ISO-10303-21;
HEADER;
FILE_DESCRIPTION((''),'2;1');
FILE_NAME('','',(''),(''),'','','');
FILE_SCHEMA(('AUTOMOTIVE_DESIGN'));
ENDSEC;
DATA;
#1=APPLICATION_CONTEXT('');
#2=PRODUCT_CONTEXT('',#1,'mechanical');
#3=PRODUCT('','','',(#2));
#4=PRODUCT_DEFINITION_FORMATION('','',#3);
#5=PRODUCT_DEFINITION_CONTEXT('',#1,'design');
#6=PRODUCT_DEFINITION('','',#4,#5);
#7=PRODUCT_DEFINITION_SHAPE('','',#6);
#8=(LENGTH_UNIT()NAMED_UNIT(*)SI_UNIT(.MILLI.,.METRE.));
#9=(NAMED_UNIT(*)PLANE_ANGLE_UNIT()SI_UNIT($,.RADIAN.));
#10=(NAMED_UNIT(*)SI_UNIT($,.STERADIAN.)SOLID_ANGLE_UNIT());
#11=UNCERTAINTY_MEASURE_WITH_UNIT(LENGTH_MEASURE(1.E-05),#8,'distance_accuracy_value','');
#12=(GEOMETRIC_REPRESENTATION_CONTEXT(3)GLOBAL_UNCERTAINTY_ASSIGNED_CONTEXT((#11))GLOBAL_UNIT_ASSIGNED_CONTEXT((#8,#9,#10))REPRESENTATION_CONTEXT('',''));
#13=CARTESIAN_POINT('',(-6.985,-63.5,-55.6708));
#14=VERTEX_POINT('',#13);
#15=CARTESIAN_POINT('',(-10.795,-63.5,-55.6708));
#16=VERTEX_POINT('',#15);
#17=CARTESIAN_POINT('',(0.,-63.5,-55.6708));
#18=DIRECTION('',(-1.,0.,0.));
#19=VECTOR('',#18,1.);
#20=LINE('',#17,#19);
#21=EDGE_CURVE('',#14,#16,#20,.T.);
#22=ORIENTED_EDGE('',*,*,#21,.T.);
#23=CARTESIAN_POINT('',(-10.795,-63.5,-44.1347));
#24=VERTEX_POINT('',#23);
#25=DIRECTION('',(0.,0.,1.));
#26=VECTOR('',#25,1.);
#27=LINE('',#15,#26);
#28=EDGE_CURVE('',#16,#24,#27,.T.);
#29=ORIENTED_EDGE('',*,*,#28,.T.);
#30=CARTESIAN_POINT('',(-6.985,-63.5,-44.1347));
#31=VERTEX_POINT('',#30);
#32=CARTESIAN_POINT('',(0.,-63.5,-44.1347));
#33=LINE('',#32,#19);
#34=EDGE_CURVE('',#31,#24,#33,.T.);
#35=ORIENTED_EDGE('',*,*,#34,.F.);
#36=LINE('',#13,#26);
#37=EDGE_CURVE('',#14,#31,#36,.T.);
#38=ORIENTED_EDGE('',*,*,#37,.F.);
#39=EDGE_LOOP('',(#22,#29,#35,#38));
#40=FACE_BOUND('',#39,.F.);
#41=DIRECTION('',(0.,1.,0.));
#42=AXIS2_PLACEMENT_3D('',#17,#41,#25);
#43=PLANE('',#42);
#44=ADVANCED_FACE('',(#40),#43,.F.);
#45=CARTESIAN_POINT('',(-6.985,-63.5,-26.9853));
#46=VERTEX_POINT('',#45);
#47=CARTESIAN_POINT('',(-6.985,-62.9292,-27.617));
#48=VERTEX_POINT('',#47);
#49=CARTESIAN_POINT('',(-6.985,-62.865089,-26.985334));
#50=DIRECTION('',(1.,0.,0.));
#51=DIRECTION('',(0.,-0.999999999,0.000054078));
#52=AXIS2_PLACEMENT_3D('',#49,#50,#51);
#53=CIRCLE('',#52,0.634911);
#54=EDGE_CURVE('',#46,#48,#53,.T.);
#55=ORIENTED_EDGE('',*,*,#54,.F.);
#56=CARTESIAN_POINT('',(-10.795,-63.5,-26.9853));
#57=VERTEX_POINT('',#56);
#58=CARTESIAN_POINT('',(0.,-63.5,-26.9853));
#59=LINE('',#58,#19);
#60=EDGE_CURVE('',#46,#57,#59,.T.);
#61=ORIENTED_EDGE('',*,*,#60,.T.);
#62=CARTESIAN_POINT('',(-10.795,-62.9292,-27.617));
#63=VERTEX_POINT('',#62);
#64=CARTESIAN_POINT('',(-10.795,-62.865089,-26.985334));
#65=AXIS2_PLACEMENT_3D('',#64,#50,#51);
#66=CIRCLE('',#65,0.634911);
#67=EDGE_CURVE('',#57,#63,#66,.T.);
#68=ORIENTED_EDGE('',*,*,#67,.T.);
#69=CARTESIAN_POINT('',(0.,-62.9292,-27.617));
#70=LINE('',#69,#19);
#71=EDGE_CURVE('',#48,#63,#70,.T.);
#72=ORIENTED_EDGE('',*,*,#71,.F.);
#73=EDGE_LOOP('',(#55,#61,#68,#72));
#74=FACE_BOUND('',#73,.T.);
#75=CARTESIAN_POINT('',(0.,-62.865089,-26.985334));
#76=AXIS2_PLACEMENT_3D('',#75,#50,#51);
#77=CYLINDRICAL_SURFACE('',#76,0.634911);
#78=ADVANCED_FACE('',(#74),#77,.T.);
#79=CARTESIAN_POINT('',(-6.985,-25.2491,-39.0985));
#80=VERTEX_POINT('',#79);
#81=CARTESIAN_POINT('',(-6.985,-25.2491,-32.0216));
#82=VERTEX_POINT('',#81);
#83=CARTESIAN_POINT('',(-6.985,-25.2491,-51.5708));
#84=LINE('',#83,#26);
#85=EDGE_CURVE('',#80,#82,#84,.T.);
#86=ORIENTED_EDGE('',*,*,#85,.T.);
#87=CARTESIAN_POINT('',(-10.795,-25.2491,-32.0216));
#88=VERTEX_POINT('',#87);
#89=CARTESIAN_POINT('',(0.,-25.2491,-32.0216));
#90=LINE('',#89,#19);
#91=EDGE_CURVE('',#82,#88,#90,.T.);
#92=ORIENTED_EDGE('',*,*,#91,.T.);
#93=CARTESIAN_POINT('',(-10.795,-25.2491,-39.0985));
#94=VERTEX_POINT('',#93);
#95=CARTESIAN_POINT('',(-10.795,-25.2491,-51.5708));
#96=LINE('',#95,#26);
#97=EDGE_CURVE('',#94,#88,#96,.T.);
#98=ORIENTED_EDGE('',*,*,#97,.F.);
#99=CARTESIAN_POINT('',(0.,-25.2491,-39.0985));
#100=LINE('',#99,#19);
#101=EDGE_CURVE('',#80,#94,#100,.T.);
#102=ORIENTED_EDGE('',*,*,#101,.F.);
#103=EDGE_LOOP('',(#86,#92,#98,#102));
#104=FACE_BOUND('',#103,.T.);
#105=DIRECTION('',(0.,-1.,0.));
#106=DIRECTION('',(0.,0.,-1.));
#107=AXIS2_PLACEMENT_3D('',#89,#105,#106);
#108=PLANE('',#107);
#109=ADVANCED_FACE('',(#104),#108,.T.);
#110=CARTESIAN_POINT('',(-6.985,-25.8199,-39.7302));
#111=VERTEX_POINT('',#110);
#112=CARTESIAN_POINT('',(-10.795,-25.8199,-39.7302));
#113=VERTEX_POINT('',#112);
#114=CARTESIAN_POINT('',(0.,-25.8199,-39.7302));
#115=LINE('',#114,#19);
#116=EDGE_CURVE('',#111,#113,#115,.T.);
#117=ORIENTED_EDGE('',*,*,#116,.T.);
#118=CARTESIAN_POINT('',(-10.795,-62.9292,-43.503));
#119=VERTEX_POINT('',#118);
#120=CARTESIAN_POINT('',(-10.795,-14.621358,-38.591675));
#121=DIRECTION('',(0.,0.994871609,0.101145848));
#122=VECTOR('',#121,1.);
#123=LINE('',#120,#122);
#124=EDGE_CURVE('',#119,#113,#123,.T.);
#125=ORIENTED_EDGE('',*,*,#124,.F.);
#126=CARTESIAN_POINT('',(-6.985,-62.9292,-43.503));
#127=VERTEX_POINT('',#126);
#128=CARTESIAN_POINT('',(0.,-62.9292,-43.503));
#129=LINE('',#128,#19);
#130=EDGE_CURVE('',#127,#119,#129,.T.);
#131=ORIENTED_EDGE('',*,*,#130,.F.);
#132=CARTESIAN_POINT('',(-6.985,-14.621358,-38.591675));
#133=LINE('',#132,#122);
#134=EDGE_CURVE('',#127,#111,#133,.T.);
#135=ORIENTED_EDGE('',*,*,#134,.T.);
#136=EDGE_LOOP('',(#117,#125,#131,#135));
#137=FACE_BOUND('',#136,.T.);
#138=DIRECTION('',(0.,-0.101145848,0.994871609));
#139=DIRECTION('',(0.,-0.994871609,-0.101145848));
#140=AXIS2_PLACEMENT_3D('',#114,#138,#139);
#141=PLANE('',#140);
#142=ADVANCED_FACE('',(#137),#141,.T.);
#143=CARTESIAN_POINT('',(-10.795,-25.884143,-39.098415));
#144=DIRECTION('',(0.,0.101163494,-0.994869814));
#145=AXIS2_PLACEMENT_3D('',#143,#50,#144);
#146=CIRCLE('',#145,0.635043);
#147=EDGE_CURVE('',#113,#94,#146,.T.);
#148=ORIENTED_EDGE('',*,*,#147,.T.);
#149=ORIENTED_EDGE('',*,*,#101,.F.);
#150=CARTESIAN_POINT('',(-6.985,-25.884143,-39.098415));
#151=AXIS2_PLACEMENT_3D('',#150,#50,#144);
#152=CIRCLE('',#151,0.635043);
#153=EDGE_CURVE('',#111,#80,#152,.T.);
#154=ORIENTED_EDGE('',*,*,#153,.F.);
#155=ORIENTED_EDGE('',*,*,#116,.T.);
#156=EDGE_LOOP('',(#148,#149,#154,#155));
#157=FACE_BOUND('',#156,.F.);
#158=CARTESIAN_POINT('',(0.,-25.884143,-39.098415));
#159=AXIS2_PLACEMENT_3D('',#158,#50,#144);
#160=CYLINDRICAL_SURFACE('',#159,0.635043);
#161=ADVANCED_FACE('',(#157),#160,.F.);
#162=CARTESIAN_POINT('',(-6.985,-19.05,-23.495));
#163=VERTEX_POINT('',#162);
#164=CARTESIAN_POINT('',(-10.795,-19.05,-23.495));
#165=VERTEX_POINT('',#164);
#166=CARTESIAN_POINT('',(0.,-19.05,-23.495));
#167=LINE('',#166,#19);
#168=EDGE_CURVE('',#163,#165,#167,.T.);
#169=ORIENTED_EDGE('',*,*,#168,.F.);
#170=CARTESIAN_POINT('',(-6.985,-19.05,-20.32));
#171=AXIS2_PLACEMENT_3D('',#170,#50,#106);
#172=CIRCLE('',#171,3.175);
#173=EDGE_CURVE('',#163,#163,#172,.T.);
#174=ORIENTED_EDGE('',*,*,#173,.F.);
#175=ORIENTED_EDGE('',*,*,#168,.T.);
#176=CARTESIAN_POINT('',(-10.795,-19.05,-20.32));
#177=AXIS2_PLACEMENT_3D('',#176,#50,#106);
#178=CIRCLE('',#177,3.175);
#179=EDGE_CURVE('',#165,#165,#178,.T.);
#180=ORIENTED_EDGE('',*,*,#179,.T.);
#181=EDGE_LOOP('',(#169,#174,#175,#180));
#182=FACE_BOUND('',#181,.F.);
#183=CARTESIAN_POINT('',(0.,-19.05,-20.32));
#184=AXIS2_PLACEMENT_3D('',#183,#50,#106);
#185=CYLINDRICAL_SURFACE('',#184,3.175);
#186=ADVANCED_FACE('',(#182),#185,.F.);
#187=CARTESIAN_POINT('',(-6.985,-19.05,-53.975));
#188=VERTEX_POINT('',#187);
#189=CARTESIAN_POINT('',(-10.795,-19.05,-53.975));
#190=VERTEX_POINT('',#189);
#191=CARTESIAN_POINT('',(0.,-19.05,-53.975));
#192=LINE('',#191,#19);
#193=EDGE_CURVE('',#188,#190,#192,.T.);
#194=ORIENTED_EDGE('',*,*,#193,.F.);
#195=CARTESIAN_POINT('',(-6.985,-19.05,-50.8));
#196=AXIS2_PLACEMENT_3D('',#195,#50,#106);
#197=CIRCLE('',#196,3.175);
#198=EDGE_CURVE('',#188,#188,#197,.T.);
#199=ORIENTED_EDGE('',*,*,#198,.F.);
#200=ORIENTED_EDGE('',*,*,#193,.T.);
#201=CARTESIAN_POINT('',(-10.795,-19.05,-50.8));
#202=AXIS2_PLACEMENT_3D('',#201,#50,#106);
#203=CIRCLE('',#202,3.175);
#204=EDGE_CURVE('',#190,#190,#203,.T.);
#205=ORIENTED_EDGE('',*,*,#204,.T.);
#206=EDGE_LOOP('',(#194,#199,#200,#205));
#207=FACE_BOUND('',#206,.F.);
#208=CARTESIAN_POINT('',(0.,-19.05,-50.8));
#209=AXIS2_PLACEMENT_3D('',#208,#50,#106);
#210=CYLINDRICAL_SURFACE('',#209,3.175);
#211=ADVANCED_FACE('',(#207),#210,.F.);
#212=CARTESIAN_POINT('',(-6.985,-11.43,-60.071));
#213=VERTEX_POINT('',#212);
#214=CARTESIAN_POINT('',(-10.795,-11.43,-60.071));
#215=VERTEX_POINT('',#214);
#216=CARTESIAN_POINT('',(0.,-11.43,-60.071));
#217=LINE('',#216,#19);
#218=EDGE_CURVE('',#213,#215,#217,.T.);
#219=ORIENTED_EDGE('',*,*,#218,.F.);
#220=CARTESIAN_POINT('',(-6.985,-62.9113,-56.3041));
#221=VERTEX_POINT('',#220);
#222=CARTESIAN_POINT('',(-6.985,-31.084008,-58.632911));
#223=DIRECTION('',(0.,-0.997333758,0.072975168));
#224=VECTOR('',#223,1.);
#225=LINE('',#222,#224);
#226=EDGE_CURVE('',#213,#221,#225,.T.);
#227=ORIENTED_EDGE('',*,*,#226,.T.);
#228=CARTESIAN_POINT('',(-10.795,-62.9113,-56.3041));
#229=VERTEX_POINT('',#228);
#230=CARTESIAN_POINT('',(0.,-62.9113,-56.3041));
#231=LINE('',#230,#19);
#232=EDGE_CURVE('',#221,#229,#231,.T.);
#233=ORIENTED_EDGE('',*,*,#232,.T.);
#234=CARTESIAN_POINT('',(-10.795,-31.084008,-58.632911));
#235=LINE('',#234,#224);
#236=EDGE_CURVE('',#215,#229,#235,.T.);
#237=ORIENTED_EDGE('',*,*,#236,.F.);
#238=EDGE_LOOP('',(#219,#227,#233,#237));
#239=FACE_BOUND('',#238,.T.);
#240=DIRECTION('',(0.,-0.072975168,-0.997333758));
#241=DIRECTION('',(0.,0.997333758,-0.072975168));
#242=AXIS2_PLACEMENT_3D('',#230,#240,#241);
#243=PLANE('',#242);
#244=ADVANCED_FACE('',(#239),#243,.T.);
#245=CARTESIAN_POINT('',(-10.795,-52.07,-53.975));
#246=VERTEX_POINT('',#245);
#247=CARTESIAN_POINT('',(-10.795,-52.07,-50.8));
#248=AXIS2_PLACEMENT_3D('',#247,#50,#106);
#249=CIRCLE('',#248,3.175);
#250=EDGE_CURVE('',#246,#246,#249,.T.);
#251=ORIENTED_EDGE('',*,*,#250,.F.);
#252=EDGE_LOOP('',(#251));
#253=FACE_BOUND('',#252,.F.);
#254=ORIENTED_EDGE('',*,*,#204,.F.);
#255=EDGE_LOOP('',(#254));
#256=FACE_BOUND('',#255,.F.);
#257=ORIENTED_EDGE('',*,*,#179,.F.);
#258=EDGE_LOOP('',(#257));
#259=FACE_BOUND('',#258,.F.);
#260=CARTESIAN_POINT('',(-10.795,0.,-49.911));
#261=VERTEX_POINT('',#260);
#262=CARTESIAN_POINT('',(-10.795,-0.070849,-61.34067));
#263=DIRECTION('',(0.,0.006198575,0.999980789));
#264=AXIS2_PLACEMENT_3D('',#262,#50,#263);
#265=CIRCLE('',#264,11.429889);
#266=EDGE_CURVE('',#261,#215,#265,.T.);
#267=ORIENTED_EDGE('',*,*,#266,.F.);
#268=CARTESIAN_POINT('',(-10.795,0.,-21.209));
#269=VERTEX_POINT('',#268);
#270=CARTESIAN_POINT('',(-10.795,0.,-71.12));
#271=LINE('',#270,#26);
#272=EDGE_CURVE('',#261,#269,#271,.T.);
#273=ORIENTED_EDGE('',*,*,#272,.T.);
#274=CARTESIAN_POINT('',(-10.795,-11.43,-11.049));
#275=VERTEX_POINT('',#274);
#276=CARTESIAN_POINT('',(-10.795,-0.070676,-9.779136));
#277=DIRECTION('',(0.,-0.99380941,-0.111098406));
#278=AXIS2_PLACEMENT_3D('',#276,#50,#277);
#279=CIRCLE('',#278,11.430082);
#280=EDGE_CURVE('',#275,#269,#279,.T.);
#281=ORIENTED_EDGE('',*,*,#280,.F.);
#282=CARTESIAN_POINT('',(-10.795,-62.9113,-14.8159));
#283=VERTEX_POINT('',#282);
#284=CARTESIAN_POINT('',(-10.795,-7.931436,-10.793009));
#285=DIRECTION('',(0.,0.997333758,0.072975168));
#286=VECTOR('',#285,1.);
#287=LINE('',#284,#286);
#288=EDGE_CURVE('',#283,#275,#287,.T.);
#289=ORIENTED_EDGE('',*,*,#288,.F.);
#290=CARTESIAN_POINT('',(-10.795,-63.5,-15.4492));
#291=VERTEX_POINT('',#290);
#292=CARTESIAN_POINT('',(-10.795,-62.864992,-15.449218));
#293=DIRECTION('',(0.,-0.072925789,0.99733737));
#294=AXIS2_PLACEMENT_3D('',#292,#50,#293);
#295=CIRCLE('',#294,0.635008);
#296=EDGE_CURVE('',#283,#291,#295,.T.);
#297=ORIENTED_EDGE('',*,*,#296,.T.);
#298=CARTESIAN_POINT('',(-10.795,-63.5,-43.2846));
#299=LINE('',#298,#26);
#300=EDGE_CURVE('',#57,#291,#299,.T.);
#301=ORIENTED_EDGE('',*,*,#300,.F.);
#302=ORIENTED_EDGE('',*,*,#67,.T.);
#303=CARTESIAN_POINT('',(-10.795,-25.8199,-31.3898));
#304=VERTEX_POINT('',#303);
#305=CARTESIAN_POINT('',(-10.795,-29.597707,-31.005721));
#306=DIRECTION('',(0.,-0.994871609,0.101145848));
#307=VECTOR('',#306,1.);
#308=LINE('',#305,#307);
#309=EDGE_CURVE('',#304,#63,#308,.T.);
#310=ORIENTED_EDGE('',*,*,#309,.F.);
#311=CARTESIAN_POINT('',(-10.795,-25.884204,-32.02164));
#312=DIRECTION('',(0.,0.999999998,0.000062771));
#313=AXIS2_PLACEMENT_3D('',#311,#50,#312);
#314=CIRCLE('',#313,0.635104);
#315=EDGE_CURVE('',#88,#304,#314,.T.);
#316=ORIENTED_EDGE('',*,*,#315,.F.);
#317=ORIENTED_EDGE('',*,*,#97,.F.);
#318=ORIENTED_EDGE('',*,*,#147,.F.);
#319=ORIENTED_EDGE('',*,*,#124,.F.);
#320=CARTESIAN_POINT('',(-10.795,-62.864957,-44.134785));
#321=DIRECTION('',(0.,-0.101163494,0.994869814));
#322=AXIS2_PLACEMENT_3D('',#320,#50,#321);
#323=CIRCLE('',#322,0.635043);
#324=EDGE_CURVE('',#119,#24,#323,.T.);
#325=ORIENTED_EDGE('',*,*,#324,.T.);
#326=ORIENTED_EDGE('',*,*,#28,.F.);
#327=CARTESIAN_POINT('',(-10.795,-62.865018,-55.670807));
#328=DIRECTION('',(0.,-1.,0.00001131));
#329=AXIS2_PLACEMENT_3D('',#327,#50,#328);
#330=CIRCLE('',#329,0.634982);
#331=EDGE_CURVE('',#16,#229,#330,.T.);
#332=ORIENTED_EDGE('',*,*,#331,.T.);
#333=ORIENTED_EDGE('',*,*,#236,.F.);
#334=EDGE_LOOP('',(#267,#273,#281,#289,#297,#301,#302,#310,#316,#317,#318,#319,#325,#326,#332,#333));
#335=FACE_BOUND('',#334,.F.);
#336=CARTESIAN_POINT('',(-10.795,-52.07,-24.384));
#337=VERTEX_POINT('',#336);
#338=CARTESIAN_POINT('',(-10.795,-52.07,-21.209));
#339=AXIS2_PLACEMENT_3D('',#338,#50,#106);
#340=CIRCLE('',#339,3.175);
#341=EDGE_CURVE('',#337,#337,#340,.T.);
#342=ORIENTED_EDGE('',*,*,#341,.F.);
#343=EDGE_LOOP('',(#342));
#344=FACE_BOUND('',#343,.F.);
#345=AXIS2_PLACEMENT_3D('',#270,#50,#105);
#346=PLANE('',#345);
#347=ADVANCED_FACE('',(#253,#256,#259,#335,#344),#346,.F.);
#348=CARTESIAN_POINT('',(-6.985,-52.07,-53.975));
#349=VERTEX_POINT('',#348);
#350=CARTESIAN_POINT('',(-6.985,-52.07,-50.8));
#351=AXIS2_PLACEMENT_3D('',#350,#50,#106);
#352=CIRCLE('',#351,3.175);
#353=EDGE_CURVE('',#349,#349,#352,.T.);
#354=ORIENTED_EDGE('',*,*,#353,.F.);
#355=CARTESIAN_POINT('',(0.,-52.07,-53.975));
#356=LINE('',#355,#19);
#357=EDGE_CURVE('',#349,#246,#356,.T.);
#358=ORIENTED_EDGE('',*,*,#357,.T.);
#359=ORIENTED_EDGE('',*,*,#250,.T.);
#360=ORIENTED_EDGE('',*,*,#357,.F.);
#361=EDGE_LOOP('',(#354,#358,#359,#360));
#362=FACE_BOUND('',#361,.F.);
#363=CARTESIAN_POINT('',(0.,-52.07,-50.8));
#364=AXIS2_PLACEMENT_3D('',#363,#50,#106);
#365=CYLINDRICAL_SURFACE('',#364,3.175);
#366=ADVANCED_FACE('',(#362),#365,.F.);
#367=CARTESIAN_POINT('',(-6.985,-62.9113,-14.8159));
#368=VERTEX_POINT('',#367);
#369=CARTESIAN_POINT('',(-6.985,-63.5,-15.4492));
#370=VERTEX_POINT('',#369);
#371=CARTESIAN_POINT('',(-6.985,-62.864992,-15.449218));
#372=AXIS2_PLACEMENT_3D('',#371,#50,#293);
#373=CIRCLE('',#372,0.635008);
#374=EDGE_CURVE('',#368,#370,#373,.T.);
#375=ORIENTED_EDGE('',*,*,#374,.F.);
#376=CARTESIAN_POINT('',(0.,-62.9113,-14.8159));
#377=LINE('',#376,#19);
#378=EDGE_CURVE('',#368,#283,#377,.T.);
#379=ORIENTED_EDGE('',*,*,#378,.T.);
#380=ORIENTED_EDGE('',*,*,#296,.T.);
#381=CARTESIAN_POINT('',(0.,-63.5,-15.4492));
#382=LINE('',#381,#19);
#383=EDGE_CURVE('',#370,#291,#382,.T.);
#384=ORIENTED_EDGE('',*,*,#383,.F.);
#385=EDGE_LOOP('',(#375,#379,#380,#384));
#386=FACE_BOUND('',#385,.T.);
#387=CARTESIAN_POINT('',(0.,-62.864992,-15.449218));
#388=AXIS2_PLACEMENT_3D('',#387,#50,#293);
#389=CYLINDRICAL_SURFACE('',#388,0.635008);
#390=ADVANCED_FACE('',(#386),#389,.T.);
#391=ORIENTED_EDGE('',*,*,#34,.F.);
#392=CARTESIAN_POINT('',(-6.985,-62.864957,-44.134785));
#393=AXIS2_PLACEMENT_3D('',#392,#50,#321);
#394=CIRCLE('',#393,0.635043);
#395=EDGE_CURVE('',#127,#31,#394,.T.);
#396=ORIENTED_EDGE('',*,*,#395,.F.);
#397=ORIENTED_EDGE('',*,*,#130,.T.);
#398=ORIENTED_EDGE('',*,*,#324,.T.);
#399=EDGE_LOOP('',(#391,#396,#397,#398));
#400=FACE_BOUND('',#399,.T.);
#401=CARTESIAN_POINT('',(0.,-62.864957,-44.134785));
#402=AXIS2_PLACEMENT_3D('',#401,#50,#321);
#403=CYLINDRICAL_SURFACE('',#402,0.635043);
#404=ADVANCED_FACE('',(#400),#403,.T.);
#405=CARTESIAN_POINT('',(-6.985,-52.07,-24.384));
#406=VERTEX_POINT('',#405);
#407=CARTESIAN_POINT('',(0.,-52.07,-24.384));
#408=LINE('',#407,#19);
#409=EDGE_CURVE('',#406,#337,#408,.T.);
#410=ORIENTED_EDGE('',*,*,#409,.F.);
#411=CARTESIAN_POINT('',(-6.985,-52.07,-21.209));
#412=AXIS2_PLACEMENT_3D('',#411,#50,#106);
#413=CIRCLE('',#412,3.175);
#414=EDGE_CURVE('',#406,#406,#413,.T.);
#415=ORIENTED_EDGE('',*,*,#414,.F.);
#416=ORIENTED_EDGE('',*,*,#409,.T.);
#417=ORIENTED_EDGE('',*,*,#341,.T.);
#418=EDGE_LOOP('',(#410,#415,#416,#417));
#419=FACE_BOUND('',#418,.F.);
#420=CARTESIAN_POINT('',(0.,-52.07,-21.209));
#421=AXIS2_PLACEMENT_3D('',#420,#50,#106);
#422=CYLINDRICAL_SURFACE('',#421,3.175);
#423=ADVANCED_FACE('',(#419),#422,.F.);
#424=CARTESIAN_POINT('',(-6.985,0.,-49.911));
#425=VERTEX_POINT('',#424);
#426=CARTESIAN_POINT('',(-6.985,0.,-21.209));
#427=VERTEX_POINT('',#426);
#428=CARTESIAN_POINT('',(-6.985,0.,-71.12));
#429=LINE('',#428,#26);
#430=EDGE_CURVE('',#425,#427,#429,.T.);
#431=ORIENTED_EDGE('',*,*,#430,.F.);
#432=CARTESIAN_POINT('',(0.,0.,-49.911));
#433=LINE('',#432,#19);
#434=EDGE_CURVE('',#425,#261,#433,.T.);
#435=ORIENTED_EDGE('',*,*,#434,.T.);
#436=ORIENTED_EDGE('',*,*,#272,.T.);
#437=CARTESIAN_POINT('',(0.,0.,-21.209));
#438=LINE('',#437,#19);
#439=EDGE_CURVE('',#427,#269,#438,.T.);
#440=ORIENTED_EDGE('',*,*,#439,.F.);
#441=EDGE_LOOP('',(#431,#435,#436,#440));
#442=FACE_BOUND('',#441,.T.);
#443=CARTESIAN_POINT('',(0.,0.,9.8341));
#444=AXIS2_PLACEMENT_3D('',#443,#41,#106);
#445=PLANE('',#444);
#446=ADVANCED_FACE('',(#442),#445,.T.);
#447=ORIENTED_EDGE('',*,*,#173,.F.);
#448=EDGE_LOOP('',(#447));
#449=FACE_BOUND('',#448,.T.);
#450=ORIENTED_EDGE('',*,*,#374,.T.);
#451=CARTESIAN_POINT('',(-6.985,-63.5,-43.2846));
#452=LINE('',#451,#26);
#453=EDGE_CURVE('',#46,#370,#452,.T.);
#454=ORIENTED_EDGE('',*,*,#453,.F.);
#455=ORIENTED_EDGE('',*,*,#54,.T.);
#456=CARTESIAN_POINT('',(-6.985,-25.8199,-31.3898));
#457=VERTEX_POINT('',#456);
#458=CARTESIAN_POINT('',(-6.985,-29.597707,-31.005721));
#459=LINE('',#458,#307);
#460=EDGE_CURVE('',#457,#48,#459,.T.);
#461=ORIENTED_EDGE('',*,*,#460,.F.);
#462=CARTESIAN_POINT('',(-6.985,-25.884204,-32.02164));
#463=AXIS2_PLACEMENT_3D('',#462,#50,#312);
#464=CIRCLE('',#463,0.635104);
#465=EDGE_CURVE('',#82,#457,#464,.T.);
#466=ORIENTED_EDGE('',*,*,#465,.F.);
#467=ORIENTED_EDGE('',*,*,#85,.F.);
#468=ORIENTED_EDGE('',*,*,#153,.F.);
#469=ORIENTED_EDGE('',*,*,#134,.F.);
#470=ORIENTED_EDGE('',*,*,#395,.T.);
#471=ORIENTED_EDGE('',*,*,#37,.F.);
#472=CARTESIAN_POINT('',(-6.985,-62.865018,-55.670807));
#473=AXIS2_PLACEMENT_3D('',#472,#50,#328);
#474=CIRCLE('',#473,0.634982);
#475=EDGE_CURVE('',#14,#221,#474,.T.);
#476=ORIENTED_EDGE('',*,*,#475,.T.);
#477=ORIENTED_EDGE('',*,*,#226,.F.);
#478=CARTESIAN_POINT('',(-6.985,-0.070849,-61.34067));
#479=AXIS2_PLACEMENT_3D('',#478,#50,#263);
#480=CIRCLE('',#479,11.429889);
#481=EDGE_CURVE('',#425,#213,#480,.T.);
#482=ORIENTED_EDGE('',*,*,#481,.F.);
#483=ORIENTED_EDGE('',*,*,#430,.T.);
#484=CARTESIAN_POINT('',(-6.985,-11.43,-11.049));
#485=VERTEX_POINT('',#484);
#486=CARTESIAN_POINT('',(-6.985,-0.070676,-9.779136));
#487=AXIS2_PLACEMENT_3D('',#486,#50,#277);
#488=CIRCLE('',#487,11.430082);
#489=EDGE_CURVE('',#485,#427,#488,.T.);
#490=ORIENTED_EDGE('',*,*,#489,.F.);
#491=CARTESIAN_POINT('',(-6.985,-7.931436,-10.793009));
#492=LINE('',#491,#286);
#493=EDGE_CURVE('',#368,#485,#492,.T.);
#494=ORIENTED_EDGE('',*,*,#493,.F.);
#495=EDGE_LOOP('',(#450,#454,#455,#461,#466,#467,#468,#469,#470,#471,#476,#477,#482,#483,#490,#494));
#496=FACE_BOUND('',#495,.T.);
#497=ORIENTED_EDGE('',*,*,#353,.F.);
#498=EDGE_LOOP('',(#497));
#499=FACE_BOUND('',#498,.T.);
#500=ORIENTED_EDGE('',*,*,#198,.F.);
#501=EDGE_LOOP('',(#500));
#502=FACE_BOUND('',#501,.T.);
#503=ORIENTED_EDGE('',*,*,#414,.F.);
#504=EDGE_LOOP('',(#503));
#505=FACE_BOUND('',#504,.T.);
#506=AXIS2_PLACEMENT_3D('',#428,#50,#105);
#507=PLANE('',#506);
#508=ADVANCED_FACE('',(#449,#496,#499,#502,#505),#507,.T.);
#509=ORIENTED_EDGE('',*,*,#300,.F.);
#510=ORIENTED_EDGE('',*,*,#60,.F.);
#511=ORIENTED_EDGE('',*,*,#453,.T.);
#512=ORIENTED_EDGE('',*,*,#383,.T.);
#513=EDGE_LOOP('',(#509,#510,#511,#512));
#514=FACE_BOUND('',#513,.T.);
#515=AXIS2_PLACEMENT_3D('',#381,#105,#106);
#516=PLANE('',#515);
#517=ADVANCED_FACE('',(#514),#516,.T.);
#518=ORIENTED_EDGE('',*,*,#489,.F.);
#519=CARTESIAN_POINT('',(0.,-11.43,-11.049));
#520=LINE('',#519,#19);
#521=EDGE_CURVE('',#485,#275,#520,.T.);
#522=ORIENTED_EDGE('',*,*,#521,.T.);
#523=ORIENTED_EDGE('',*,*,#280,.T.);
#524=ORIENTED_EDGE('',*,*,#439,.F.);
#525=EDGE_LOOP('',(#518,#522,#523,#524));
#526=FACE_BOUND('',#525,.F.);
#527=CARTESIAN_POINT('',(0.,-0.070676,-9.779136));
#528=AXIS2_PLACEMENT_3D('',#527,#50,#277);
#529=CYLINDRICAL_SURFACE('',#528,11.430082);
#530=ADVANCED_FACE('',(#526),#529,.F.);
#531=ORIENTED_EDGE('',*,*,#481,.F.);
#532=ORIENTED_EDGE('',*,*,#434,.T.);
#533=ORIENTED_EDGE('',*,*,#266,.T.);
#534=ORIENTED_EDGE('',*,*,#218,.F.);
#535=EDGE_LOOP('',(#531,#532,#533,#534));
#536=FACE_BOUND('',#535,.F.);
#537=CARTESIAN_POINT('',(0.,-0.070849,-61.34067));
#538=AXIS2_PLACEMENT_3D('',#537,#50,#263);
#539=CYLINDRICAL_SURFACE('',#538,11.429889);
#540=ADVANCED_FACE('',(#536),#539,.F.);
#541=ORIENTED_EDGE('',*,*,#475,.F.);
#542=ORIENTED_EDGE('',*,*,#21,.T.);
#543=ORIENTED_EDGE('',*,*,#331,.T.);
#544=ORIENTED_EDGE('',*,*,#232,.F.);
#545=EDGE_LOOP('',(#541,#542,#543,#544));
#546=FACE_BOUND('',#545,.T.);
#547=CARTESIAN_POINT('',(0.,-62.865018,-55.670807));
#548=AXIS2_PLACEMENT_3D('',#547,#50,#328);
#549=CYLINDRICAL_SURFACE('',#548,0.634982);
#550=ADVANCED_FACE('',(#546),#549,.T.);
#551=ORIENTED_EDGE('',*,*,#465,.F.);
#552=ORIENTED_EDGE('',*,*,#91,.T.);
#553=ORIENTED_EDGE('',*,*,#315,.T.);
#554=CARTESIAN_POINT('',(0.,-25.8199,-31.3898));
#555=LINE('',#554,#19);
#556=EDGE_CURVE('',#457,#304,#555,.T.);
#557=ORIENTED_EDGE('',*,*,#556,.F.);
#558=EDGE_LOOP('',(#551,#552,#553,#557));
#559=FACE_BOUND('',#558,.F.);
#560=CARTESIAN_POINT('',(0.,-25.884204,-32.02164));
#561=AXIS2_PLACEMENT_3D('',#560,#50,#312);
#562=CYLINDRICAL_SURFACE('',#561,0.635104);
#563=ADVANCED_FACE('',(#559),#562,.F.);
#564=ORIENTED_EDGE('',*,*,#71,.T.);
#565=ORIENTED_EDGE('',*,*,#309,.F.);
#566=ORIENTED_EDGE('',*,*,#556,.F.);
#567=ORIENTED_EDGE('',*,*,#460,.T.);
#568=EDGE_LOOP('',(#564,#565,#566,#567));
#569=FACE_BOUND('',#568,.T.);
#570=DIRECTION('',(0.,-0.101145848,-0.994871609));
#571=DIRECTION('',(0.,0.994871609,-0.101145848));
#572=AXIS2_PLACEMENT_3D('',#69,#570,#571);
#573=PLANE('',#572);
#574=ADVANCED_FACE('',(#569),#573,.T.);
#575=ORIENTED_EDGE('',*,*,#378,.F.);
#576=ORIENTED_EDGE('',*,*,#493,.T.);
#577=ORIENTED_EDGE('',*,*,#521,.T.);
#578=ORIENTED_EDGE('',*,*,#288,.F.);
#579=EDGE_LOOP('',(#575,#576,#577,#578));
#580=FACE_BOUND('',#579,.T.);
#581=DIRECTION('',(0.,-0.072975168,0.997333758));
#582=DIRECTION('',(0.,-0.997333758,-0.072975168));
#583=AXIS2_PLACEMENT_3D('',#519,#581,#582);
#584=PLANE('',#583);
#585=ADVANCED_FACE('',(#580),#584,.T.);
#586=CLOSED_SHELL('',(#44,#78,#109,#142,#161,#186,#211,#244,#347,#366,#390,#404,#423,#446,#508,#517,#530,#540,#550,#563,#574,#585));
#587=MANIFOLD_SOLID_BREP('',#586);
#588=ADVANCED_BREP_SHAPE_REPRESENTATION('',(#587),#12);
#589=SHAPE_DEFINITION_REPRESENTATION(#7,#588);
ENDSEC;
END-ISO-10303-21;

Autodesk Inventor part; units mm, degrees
ref_plane "YZ Plane" through (0, 0, 0) normal (1, 0, 0) x (0, 1, 0)
ref_plane "XZ Plane" through (0, 0, 0) normal (0, 1, 0) x (-1, 0, 0)
sketch "Sketch1" plane through (0, 0, 0) normal (0, 1, 0) x (-1, 0, 0)
  line L0 (0, 0) -> (17.78, 0)
  line L1 (17.78, 0) -> (17.78, -71.12)
  line L2 (17.78, -71.12) -> (0, -71.12)
  line L3 (0, -71.12) -> (0, 0)
  dimension "d0" = 71.12
  dimension "d1" = 17.78
extrude "Extrusion1" add sketch "Sketch1" along normal blind 31.75
sketch "Sketch2" plane through (0, 0, 0) normal (1, 0, 0) x (0, 0, -1)
  line L0 (63.2681, 31.9521) -> (6.1181, 31.9521)
  line L1 (2.3767, 22.4271) -> (69.8708, 22.4271)
  line L2 (34.6931, 31.9521) -> (34.6931, 22.4271)
  line L3 (3.5781, 31.9521) -> (3.5781, 0.2021)
  line L4 (3.5781, 22.4271) -> (11.8331, 22.4271)
  line L5 (65.8081, 31.9521) -> (65.8081, 0.2021)
  line L6 (65.8081, 22.4271) -> (57.5531, 22.4271)
  line L7 (34.6931, 22.4271) -> (38.5031, 22.4271)
  line L8 (34.6931, 22.4271) -> (30.8831, 22.4271)
  line L9 (3.5781, 22.4271) -> (13.1031, 22.4271)
  line L10 (34.6931, 22.4271) -> (28.9781, 22.4271)
  line L11 (34.6931, 22.4271) -> (40.4081, 22.4271)
  line L12 (65.8081, 22.4271) -> (56.2831, 22.4271)
  line L13 (3.5781, 37.1802) -> (21.3581, 37.1802)
  line L14 (21.3581, 37.1802) -> (21.3581, 22.4271)
  line L15 (21.3581, 31.9521) -> (21.3581, 29.4121)
  line L16 (3.5781, 29.4121) -> (65.8081, 29.4121)
  line L17 (40.4081, 22.4271) -> (47.996, 43.2748)
  line L18 (56.2831, 22.4271) -> (51.7026, 35.0119)
  line L19 (13.1031, 22.4271) -> (18.1209, 36.2135)
  line L20 (28.9781, 22.4271) -> (24.6631, 34.2823)
  line L21 (40.4081, 22.4271) -> (56.2831, 22.4271)
  line L22 (-0.2496, 29.1143) -> (71.3808, 29.1143)
  line L23 (71.3808, 29.1143) -> (71.3808, 39.1409)
  line L24 (71.3808, 39.1409) -> (-0.2496, 39.1409)
  line L25 (-0.2496, 39.1409) -> (-0.2496, 29.1143)
  line L26 (2.3767, 22.4271) -> (-0.2496, 29.1143)
  line L27 (68.8531, 22.4271) -> (71.3808, 29.1143)
  line L28 (2.3767, 22.4271) -> (-8.5713, 22.4271)
  line L29 (-8.5713, 22.4271) -> (69.8708, 22.4271)
  line L30 (76.0387, 22.4271) -> (71.3808, 31.956)
  line L31 (69.8708, 22.4271) -> (76.0387, 22.4271)
  line L32 (71.12, 0) -> (71.12, 31.75) projected
  line L33 (-7.4424, 22.4271) -> (-0.2496, 37.0193)
  point P0 (0, 0)
  point P1 (15.537, 29.1143)
  point P2 (26.5441, 29.1143)
  point P3 (42.842, 29.1143)
  point P4 (53.8491, 29.1143)
  dimension "d4" = 9.525
  dimension "d5" = 5.715
  dimension "d6" = 5.715
  dimension "d7" = 9.525
  dimension "d8" = 17.78
  dimension "d9" = 2.54
  dimension "d10" = 70
  dimension "d11" = 70
  dimension "d12" = 70
  dimension "d13" = 70
extrude "Extrusion2" cut sketch "Sketch2" against normal blind 31.75 contours L18 L16 L17 L0 | L0 L17 L24 L23 L22 L5 L16 L18 | L17 L16 L2 L0 | L0 L19 L16 L3 L22 L25 L24 L17 | L18 L22 L17 L16 | L16 L5 L22 L18 | L2 L16 L20 L0 | L17 L22 L2 L16 | L22 L5 L1 L18 | L20 L16 L14 L0 | L2 L22 L20 L16 | L17 L1 L2 L22 | L22 L32 L27 L1 L5 | L14 L16 L19 L0 | L20 L22 L14 L16 | L2 L1 L20 L22 | L25 L26 L28 L33 | L22 L27 L32 | L14 L22 L19 L16 | L22 L3 L1 L26 | L19 L22 L3 L16 | L22 L19 L1 L3
sketch "Sketch3" plane through (0, 0, 0) normal (1, 0, 0) x (0, 0, -1)
  line L0 (68.8531, 22.4271) -> (56.2831, 22.4271) projected
  line L1 (58.4871, 22.4271) -> (81.641, 22.4271)
  line L2 (81.641, 22.4271) -> (81.641, 34.8647)
  line L3 (81.641, 34.8647) -> (58.4871, 34.8647)
  line L4 (58.4871, 34.8647) -> (58.4871, 22.4271)
  point P0 (0, 0)
extrude "Extrusion3" cut sketch "Sketch3" against normal blind 31.75
sketch "Sketch4" plane through (0, 29.1143, -15.537) normal (0, 1, 0) x (1, 0, 0)
  line L0 (0, -15.537) -> (-17.78, -15.537) projected
  line L1 (0, -2.434) -> (0, -15.537) projected
  line L2 (0, -2.434) -> (-17.78, -2.434) projected
  line L3 (-17.78, -15.537) -> (-17.78, -2.434) projected
  line L4 (-17.78, 13.441) -> (-17.78, 24.871) projected
  line L5 (0, 13.441) -> (-17.78, 13.441) projected
  line L6 (0, 24.871) -> (0, 13.441) projected
  line L7 (0, 24.871) -> (-17.78, 24.871) projected
  line L8 (-17.78, 40.746) -> (-17.78, 55.583) projected
  line L9 (0, 40.746) -> (-17.78, 40.746) projected
  line L10 (0, 55.583) -> (0, 40.746) projected
  line L11 (-17.78, 55.583) -> (0, 55.583) projected
  line L12 (-15.24, -12.997) -> (-2.54, -12.997)
  line L13 (-2.54, -12.997) -> (-2.54, -4.974)
  line L14 (-2.54, -4.974) -> (-15.24, -4.974)
  line L15 (-15.24, -4.974) -> (-15.24, -12.997)
  line L16 (-15.24, -4.974) -> (-15.24, 52.7376)
  line L17 (-8.89, -12.997) -> (-15.24, 6.3053)
  line L18 (-8.89, -12.997) -> (-8.89, 3.3229)
  line L19 (-8.89, -12.997) -> (-2.54, 6.3053)
  line L20 (-2.54, 53.043) -> (-2.54, 43.286)
  line L21 (-2.54, 43.286) -> (-15.24, 43.286)
  line L22 (-15.24, 43.286) -> (-15.24, 53.043)
  line L23 (-15.24, 53.043) -> (-2.54, 53.043)
  line L24 (-2.54, -4.974) -> (-2.54, 53.043)
  point P0 (-2.54, 6.3053)
  point P1 (-15.24, 6.3053)
  dimension "d18" = 2.54
  dimension "d20" = 20.32
  dimension "d21" = 2.54
extrude "Extrusion4" cut sketch "Sketch4" against normal blind 26.67 contours L19 L14 L18 L2 | L2 L17 L16 L5 L24 L19 | L2 L18 L14 L17 | L19 L18 L14 | L5 L16 L7 L24 | L14 L18 L17 | L7 L16 L9 L24 | L9 L16 L21 L24 | L21 L16 L22 L23 L20
ref_plane "Work Plane1" through (0, 2.54, 0) normal (0, -1, 0) x (1, 0, 0)
sketch "Sketch5" plane through (0, 2.54, 0) normal (0, -1, 0) x (1, 0, 0)
  line L0 (-5.415, -13.1031) -> (-8.89, -2.54) projected
  line L1 (-8.89, -2.54) -> (-12.365, -13.1031) projected
  line L2 (-12.365, -13.1031) -> (-17.78, -13.1031) projected
  line L3 (-17.78, 0) -> (-17.78, -13.1031) projected
  line L4 (0, 0) -> (-17.78, 0) projected
  line L5 (0, -13.1031) -> (0, 0) projected
  line L6 (0, -13.1031) -> (-5.415, -13.1031) projected
  line L7 (-15.24, -2.54) -> (-15.24, -10.5631)
  line L8 (-15.24, -10.5631) -> (-14.2033, -10.5631)
  line L9 (-14.2033, -10.5631) -> (-8.89, 5.588)
  line L10 (-8.89, 5.588) -> (-3.5767, -10.5631)
  line L11 (-3.5767, -10.5631) -> (-2.54, -10.5631)
  line L12 (-2.54, -10.5631) -> (-2.54, -2.54)
  line L13 (-2.54, -2.54) -> (-15.24, -2.54)
  line L14 (-2.54, -68.58) -> (-2.54, -21.8423) projected
  line L15 (-15.24, -2.54) -> (-2.54, -2.54)
  line L16 (-2.54, -2.54) -> (-2.54, -68.58)
  line L17 (-2.54, -68.58) -> (-15.24, -68.58)
  line L18 (-15.24, -68.58) -> (-15.24, -2.54)
  point P0 (-2.54, -21.8423)
  dimension "d25" = 2.54
extrude "Extrusion5" cut sketch "Sketch5" against normal blind 17.78 contours L6 L16 L14 L17 L18 L2 L1 L0 | L0 L13 L10 L11 L16 L6 | L1 L2 L18 L8 L9 L13 | L13 L12 L11 L10 | L9 L8 L7 L13
sketch "Sketch6" plane through (0, 0, 0) normal (0, -1, 0) x (1, 0, 0)
  line L0 (0, -71.12) -> (-17.78, -71.12) projected
  line L1 (0, 0) -> (0, -71.12) projected
  line L2 (-17.78, 0) -> (0, 0) projected
  line L3 (-17.78, -71.12) -> (-17.78, 0) projected
  line L4 (-6.985, -64.135) -> (-10.795, -64.135)
  line L5 (-10.795, -64.135) -> (-10.795, -6.985)
  line L6 (-10.795, -6.985) -> (-6.985, -6.985)
  line L7 (-6.985, -6.985) -> (-6.985, -64.135)
  dimension "d28" = 6.985
sketch "Sketch7" plane through (0, 0, 0) normal (1, 0, 0) x (0, 0, -1)
  line L0 (4.699, 0) -> (66.421, 0)
  line L1 (4.699, 0) -> (4.699, -76.0491)
  line L2 (66.421, -76.0491) -> (4.699, -76.0491)
  line L3 (66.421, 0) -> (66.421, -76.0491)
  line L4 (4.699, 0) -> (66.421, 0)
  line L5 (4.699, 0) -> (11.049, 0)
  line L6 (11.049, 0) -> (11.049, -11.43)
  line L7 (4.445, 0) -> (57.277, 0)
  line L8 (66.421, 0) -> (60.071, 0)
  line L9 (60.071, 0) -> (60.071, -11.43)
  line L10 (4.699, 0) -> (4.699, -63.5)
  line L11 (4.699, 0) -> (4.699, -76.0491)
  line L12 (66.421, 0) -> (66.421, -76.0491)
  line L13 (14.859, -63.5) -> (26.9853, -63.5)
  line L14 (55.6708, -63.5) -> (43.561, -63.5)
  line L15 (11.049, -11.43) -> (14.8159, -62.9113)
  line L16 (27.617, -62.9292) -> (31.3898, -25.8199)
  line L17 (32.0216, -25.2491) -> (39.0985, -25.2491)
  line L18 (39.7302, -25.8199) -> (43.503, -62.9292)
  line L19 (56.3041, -62.9113) -> (60.071, -11.43)
  line L20 (11.049, 0) -> (21.209, 0)
  line L21 (60.071, 0) -> (49.911, 0)
  arc A0 (11.049, -11.43) -> (21.209, 0) centre (9.7792, -0.0708) ccw
  arc A1 (49.911, 0) -> (60.071, -11.43) centre (61.3408, -0.0708) ccw
  arc A2 (32.0216, -25.2491) -> (31.3898, -25.8199) centre (32.0216, -25.8841) ccw
  arc A3 (39.7302, -25.8199) -> (39.0985, -25.2491) centre (39.0985, -25.8841) ccw
  arc A4 (26.9853, -63.5) -> (27.617, -62.9292) centre (26.9853, -62.865) ccw
  arc A5 (14.8159, -62.9113) -> (15.4492, -63.5) centre (15.4492, -62.865) ccw
  arc A6 (43.503, -62.9292) -> (44.1347, -63.5) centre (44.1347, -62.865) ccw
  arc A7 (55.6708, -63.5) -> (56.3041, -62.9113) centre (55.6708, -62.865) ccw
  line L22 (51.1504, -63.5) -> (51.1504, -52.07)
  circle A8 centre (20.32, -19.05) radius 3.175
  circle A9 centre (50.8, -19.05) radius 3.175
  circle A10 centre (21.209, -52.07) radius 3.175
  line L23 (71.12, 0) -> (0, 0) projected
  line L24 (66.421, 0) -> (71.12, 0)
  line L25 (71.12, 0) -> (66.421, 0)
  line L26 (66.421, 0) -> (66.421, 0.7466)
  line L27 (35.56, -25.2491) -> (35.56, 0)
  line L28 (26.5441, 29.1143) -> (15.537, 29.1143) projected
  line L29 (50.8, -63.5) -> (50.8, -52.07)
  circle A11 centre (50.8, -52.07) radius 3.175
  point P0 (27.559, -63.5)
  point P1 (50.8, -55.245)
  point P2 (51.1504, -55.2256)
  point P3 (15.4492, -63.5)
  dimension "d0" = 71.12
  dimension "d1" = 17.78
  dimension "d29" = 6.35
  dimension "d30" = 11.43
  dimension "d31" = 6.35
  dimension "d32" = 11.43
  dimension "d33" = 63.5
  dimension "d34" = 10.16
  dimension "d36" = 12.7
  dimension "d41" = 10.16
  dimension "d42" = 10.16
  dimension "d43" = 11.43
  dimension "d44" = 11.43
  dimension "d45" = 0.635
  dimension "d47" = 11.43
  dimension "d52" = 6.35
  dimension "d53" = 6.35
  dimension "d55" = 4.699
  dimension "d56" = 180
  dimension "d57" = 90
  dimension "d58" = 15.24
  dimension "d59" = 15.24
  dimension "d60" = 11.43
  dimension "d61" = 6.35
extrude "Extrusion6" add sketch "Sketch7" against normal blind 17.78 contours L0 L27 L17 A2 L16 A4 L13 A5 L15 A0 | L0 A1 L19 A7 L14 L22 A11 L29 A6 L18 A3 L17 L27
sketch "Sketch8" plane through (0, 0, -71.12) normal (0, 0, -1) x (-1, 0, 0)
  line L0 (17.78, 0) -> (0, 0) projected
  line L1 (8.89, 0) -> (8.89, -149.5828)
  line L2 (10.795, 0) -> (10.795, -149.5828)
  line L3 (6.985, 0) -> (6.985, -149.5828)
  line L4 (6.985, -79.5842) -> (-31.3373, 0)
  line L5 (-31.3373, 0) -> (44.0214, 0)
  line L6 (44.0214, 0) -> (10.795, -80.7526)
  dimension "d64" = 1.905
  dimension "d65" = 1.905
extrude "Extrusion7" cut sketch "Sketch8" against normal blind 508
sketch "Sketch9" plane through (-6.985, -63.5, -51.1504) normal (1, 0, 0) x (0, 0, -1)
  arc A0 (0, 8.2744) -> (-0.3504, 8.255) centre (-0.3504, 11.43) ccw projected
  circle A1 centre (-0.3504, 11.43) radius 3.175
  line L0 (-7.0156, 0) -> (-0.3504, 0) projected
  line L1 (-0.6355, 0) -> (0.8386, 0)
  line L2 (-0.4861, 0) -> (-1.3257, 8.4085)
  line L3 (0, 0) -> (4.5204, 0) projected
  line L4 (0.4648, 0) -> (0.4648, 8.3614)
  point P0 (-51.1504, 63.5)
  point P1 (0.4648, 0)
  point P2 (0.4648, 8.3614)
  point P3 (-0.3504, 8.255)
  point P4 (-1.3257, 8.4085)
  point P5 (-0.4861, 0)
extrude "Extrusion8" add sketch "Sketch9" against normal blind 3.81 contours A0 L4 L1 L0 L2 A1
sketch "Sketch10" plane through (0, 0, 0) normal (1, 0, 0) x (0, 0, -1)
  line L0 (3.653, 22.2211) -> (3.653, -0.0039)
  line L1 (3.653, 22.2211) -> (3.653, -0.0039)
  line L2 (3.653, -0.0039) -> (3.653, 7.3621)
  line L3 (3.653, 7.3621) -> (65.883, 7.3621)
  line L4 (65.883, 22.2211) -> (65.883, -0.0039)
  line L5 (15.687, 29.1143) -> (26.5441, 29.1143)
  line L6 (21.1155, 29.1143) -> (21.1155, 4.5403)
  line L7 (53.8491, 29.1143) -> (42.992, 29.1143)
  line L8 (48.4205, 29.1143) -> (48.4205, 5.1354)
  line L9 (21.1155, 7.3621) -> (17.9405, 7.3621)
  line L10 (48.4205, 7.3621) -> (51.5955, 7.3621)
  line L11 (51.5955, 7.3621) -> (51.5955, 11.8071)
  line L12 (17.9405, 7.3621) -> (17.9405, 11.8071)
  line L13 (21.1155, 11.8071) -> (48.4205, 11.8071)
  line L14 (3.653, 7.3621) -> (3.653, 22.2211)
  line L15 (3.653, 14.7916) -> (68.0217, 14.7916)
  line L16 (3.653, 16.6966) -> (68.0217, 16.6966)
  circle A0 centre (21.1155, 16.6966) radius 1.905
  circle A1 centre (48.4205, 16.6966) radius 1.905
  line L17 (50.3255, 11.8071) -> (53.5005, 7.3621)
  line L18 (19.2105, 11.8071) -> (16.0355, 7.3621)
  line L19 (19.2105, 11.8071) -> (21.1155, 11.8071)
  line L20 (50.3255, 11.8071) -> (48.4205, 11.8071)
  line L21 (16.5523, 6.9931) -> (19.5373, 11.1721)
  line L22 (19.5373, 11.1721) -> (21.1155, 11.1721)
  line L23 (21.1155, 11.1721) -> (48.4205, 11.1721)
  line L24 (48.4205, 11.1721) -> (49.9988, 11.1721)
  line L25 (49.9988, 11.1721) -> (52.9838, 6.9931)
  line L26 (3.653, 6.7271) -> (65.883, 6.7271)
  line L27 (16.5523, 6.9931) -> (16.3623, 6.7271)
  line L28 (52.9838, 6.9931) -> (53.5005, 6.3456)
  line L29 (3.653, 7.3621) -> (-3.2474, 7.3621)
  line L30 (3.653, 6.7271) -> (-3.0258, 6.7271)
  line L31 (65.883, 7.3621) -> (72.9807, 7.3621)
  line L32 (65.883, 6.7271) -> (72.9807, 6.7271)
  line L33 (72.9807, 7.3621) -> (72.9807, -12.768)
  line L34 (72.9807, -12.768) -> (-11.8016, -10.0683)
  line L35 (-11.8016, -10.0683) -> (-3.2474, 7.3621)
  point P0 (0, 0)
  point P1 (6.193, 31.7461)
  dimension "d70" = 7.366
  dimension "d71" = 3.175
  dimension "d72" = 3.175
  dimension "d73" = 4.445
  dimension "d74" = 4.445
  dimension "d75" = 1.905
  dimension "d76" = 0.635
  dimension "d77" = 0.635
extrude "Extrusion9" cut sketch "Sketch10" against normal blind 0.3175 contours L3 L21 L27 L26 L0 | L0 L26 L32 L33 L34 L35 L29 | L18 L12 L21 L3 | L13 L8 L23 L6 | L6 L22 L21 L12 L18 L19 | L27 L21 L3 L6 L26 | L21 L12 L3 | L23 L8 L3 L6 | L6 L3 L12 L21 L22 | L20 L17 L11 L25 L24 L8 | L6 L3 L8 L26 | L24 L25 L11 L3 L8 | L4 L26 L28 L25 L3 | L31 L33 L32 L4 | L8 L3 L25 L28 L26 | L17 L3 L25 L11 | L11 L25 L3
sketch "Sketch11" plane through (-17.78, 0, -71.12) normal (-1, 0, 0) x (0, 0, 1)
  line L0 (51.9095, 11.8071) -> (20.7945, 11.8071) projected
  line L1 (20.7945, 11.8071) -> (17.6195, 7.3621) projected
  line L2 (17.6195, 7.3621) -> (0, 7.3621) projected
  line L3 (55.0845, 7.3621) -> (51.9095, 11.8071) projected
  line L4 (71.12, 7.3621) -> (55.0845, 7.3621) projected
  line L5 (0, 0) -> (0, 22.4271) projected
  line L6 (71.12, 0) -> (71.12, 22.4271) projected
  line L7 (0, 7.3621) -> (0, 0) projected
  line L8 (0, 0) -> (71.12, 0)
  line L9 (71.12, 0) -> (71.12, 7.3621)
  line L10 (71.12, 7.3621) -> (0, 7.3621)
  line L11 (0, 7.3621) -> (0, 0)
  line L12 (20.7945, 11.8071) -> (51.9095, 11.8071)
  line L13 (55.0845, 7.3621) -> (51.9095, 11.8071) projected
  line L14 (55.0845, 7.3621) -> (51.9095, 11.8071)
  line L15 (20.7945, 11.8071) -> (17.6195, 7.3621)
extrude "Extrusion10" cut sketch "Sketch11" against normal blind 0.3175
sketch "Sketch12" plane through (0, 22.4271, -71.12) normal (0, 0, -1) x (-1, 0, 0)
  line L0 (17.78, -15.0649) -> (17.4625, -15.0649) projected
  line L1 (0, -22.4271) -> (17.78, -22.4271)
  line L2 (17.78, -22.4271) -> (17.78, -15.0649)
  line L3 (17.78, -15.0649) -> (0, -15.0649)
  line L4 (0, -15.0649) -> (0, -22.4271)
extrude "Extrusion11" cut sketch "Sketch12" against normal blind 0.3175
sketch "Sketch13" plane through (-17.78, 22.4271, 0) normal (0, 0, 1) x (1, 0, 0)
  line L0 (0, -15.0649) -> (0.3175, -15.0649) projected
  line L1 (0.3175, -15.0649) -> (0.3175, -22.4271) projected
  line L2 (0.3175, -22.4271) -> (17.4625, -22.4271) projected
  line L3 (17.4625, -22.4271) -> (17.4625, -15.0649) projected
  line L4 (17.4625, -15.0649) -> (17.78, -15.0649) projected
  line L5 (17.78, -15.0649) -> (17.78, 0) projected
  line L6 (17.78, 0) -> (0, 0) projected
  line L7 (0, -15.0649) -> (0, 0) projected
  line L8 (0.3175, -22.4271) -> (17.4625, -22.4271) projected
  line L9 (17.78, -15.0649) -> (17.78, 0) projected
  line L10 (0.3175, -22.4271) -> (17.78, -22.4271)
  line L11 (17.78, -22.4271) -> (17.78, -15.0649)
  line L12 (17.78, -15.0649) -> (0.3175, -15.0649)
  line L13 (0.3175, -15.0649) -> (0.3175, -22.4271)
extrude "Extrusion12" cut sketch "Sketch13" against normal blind 0.3175 contours L12 L3 L2 L1
sketch "Sketch14" plane through (0, 22.4271, -56.2831) normal (1, 0, 0) x (0, 0, -1)
  line L0 (-34.4407, 6.6873) -> (-29.739, 6.6873) projected
  line L1 (-34.4407, 6.6873) -> (-34.4407, -5.7587)
  line L2 (-34.4407, 6.6873) -> (-34.4407, -2.1071) projected
  line L3 (-2.434, 6.6873) -> (-13.441, 6.6873) projected
  line L4 (-8.9424, 6.6873) -> (-8.9424, -5.7587)
  line L5 (-56.2831, -15.0649) -> (-56.2831, 0) projected
  line L6 (-56.2831, -5.7587) -> (-35.2011, -5.7587)
  line L7 (14.8369, -5.7587) -> (14.8369, -26.8407)
  line L8 (14.8369, -5.7587) -> (-6.2451, -5.7587)
  circle A0 centre (-35.2011, -5.7587) radius 1.905
  circle A1 centre (-6.2451, -5.7587) radius 1.905
  point P0 (-56.2831, -22.4271)
  dimension "d94" = 12.446
  dimension "d96" = 12.446
  dimension "d97" = 21.082
  dimension "d98" = 21.082
  dimension "d99" = 21.082
  dimension "d100" = 3.81
  dimension "d101" = 3.81
extrude "Extrusion13" add sketch "Sketch14" along normal blind 1.27 and the other way blind 19.05
sketch "Sketch15" plane through (0, 2.4443, -15.537) normal (0, 1, 0) x (1, 0, 0)
  line L0 (-2.54, 53.043) -> (-2.54, 6.3053) projected
  line L1 (-15.24, 6.3053) -> (-15.24, -12.997) projected
  line L2 (-2.54, 45.996) -> (-15.24, 45.996)
  line L3 (-15.24, 45.996) -> (-15.24, 0.868)
  line L4 (-15.24, 0.868) -> (-2.54, 0.868)
  line L5 (-2.54, 0.868) -> (-2.54, 45.996)
  point P0 (0, -15.537)
  point P1 (-2.54, 6.3053)
extrude "Extrusion14" cut sketch "Sketch15" along normal blind 16.51
fillet "Fillet1" radius 0.762 2 edges at (1.27, 16.6683, -48.133) (1.27, 16.6683, -19.177)
fillet "Fillet2" radius 0.762 2 edges at (-19.05, 16.6683, -48.133) (-19.05, 16.6683, -19.177)
fillet "Fillet3" radius 0.762 8 edges at (-3.5771, 29.1143, -18.6897) (-5.0146, 25.7707, -14.3201) (-7.1525, 22.4271, -7.8215) (-10.6275, 22.4271, -7.8215) (-12.7654, 25.7707, -14.3201) (-14.2029, 29.1143, -18.6897) (-12.065, 20.32, -12.1912) (-5.715, 20.32, -12.1912)
fillet "Fillet4" radius 0.254 14 edges at (-15.24, 22.4271, -34.6931) (-2.54, 22.4271, -63.7015) (-2.54, 25.7707, -27.7611) (-2.54, 29.1143, -24.1932) (-2.54, 25.7707, -41.6251) (-2.54, 29.1143, -48.3456) (-2.54, 25.7707, -55.0661) (-8.89, 22.4271, -68.58) (-15.24, 22.4271, -62.2788) (-15.24, 25.7707, -55.0661) (-15.24, 29.1143, -48.3456) (-15.24, 25.7707, -41.6251) (-15.24, 25.7707, -27.7611) (-15.24, 29.1143, -24.1932)
sketch "Sketch16" plane through (0, 22.4271, -56.2831) normal (1, 0, 0) x (0, 0, -1)
  line L0 (-66.1172, -22.4271) -> (27.4517, -22.4271)
  line L1 (27.4517, -22.4271) -> (27.4517, 18.3557)
  line L2 (27.4517, 18.3557) -> (-66.1172, 18.3557)
  line L3 (-66.1172, 18.3557) -> (-66.1172, -22.4271)
  point P0 (-56.2831, -22.4271)
extrude "Extrusion15" cut sketch "Sketch16" along normal mid plane 254
sketch "Sketch17" plane through (-6.985, -63.5, -44.1347) normal (1, 0, 0) x (0, 0, -1)
  arc A0 (-33.0857, 52.07) -> (-22.9257, 63.5) centre (-34.3555, 63.4292) ccw projected
  line L0 (12.1694, 0.5887) -> (15.9363, 52.07) projected
  line L1 (11.5361, 0) -> (0, 0) projected
  line L2 (5.7763, 63.5) -> (-22.9257, 63.5) projected
  point P0 (-44.1347, 63.5)
  dimension "d114" = 49.022
  dimension "d115" = 63.5
sketch "Sketch18" plane through (0, 0, 0) normal (0, 0, 1) x (1, 0, 0)
  line L0 (-6.985, -11.43) -> (-6.985, 0) projected
  line L1 (-10.795, 0) -> (-10.795, -11.43) projected
  point P0 (0, 0)
  dimension "d116" = 3.81
properties part number "full bracket"
